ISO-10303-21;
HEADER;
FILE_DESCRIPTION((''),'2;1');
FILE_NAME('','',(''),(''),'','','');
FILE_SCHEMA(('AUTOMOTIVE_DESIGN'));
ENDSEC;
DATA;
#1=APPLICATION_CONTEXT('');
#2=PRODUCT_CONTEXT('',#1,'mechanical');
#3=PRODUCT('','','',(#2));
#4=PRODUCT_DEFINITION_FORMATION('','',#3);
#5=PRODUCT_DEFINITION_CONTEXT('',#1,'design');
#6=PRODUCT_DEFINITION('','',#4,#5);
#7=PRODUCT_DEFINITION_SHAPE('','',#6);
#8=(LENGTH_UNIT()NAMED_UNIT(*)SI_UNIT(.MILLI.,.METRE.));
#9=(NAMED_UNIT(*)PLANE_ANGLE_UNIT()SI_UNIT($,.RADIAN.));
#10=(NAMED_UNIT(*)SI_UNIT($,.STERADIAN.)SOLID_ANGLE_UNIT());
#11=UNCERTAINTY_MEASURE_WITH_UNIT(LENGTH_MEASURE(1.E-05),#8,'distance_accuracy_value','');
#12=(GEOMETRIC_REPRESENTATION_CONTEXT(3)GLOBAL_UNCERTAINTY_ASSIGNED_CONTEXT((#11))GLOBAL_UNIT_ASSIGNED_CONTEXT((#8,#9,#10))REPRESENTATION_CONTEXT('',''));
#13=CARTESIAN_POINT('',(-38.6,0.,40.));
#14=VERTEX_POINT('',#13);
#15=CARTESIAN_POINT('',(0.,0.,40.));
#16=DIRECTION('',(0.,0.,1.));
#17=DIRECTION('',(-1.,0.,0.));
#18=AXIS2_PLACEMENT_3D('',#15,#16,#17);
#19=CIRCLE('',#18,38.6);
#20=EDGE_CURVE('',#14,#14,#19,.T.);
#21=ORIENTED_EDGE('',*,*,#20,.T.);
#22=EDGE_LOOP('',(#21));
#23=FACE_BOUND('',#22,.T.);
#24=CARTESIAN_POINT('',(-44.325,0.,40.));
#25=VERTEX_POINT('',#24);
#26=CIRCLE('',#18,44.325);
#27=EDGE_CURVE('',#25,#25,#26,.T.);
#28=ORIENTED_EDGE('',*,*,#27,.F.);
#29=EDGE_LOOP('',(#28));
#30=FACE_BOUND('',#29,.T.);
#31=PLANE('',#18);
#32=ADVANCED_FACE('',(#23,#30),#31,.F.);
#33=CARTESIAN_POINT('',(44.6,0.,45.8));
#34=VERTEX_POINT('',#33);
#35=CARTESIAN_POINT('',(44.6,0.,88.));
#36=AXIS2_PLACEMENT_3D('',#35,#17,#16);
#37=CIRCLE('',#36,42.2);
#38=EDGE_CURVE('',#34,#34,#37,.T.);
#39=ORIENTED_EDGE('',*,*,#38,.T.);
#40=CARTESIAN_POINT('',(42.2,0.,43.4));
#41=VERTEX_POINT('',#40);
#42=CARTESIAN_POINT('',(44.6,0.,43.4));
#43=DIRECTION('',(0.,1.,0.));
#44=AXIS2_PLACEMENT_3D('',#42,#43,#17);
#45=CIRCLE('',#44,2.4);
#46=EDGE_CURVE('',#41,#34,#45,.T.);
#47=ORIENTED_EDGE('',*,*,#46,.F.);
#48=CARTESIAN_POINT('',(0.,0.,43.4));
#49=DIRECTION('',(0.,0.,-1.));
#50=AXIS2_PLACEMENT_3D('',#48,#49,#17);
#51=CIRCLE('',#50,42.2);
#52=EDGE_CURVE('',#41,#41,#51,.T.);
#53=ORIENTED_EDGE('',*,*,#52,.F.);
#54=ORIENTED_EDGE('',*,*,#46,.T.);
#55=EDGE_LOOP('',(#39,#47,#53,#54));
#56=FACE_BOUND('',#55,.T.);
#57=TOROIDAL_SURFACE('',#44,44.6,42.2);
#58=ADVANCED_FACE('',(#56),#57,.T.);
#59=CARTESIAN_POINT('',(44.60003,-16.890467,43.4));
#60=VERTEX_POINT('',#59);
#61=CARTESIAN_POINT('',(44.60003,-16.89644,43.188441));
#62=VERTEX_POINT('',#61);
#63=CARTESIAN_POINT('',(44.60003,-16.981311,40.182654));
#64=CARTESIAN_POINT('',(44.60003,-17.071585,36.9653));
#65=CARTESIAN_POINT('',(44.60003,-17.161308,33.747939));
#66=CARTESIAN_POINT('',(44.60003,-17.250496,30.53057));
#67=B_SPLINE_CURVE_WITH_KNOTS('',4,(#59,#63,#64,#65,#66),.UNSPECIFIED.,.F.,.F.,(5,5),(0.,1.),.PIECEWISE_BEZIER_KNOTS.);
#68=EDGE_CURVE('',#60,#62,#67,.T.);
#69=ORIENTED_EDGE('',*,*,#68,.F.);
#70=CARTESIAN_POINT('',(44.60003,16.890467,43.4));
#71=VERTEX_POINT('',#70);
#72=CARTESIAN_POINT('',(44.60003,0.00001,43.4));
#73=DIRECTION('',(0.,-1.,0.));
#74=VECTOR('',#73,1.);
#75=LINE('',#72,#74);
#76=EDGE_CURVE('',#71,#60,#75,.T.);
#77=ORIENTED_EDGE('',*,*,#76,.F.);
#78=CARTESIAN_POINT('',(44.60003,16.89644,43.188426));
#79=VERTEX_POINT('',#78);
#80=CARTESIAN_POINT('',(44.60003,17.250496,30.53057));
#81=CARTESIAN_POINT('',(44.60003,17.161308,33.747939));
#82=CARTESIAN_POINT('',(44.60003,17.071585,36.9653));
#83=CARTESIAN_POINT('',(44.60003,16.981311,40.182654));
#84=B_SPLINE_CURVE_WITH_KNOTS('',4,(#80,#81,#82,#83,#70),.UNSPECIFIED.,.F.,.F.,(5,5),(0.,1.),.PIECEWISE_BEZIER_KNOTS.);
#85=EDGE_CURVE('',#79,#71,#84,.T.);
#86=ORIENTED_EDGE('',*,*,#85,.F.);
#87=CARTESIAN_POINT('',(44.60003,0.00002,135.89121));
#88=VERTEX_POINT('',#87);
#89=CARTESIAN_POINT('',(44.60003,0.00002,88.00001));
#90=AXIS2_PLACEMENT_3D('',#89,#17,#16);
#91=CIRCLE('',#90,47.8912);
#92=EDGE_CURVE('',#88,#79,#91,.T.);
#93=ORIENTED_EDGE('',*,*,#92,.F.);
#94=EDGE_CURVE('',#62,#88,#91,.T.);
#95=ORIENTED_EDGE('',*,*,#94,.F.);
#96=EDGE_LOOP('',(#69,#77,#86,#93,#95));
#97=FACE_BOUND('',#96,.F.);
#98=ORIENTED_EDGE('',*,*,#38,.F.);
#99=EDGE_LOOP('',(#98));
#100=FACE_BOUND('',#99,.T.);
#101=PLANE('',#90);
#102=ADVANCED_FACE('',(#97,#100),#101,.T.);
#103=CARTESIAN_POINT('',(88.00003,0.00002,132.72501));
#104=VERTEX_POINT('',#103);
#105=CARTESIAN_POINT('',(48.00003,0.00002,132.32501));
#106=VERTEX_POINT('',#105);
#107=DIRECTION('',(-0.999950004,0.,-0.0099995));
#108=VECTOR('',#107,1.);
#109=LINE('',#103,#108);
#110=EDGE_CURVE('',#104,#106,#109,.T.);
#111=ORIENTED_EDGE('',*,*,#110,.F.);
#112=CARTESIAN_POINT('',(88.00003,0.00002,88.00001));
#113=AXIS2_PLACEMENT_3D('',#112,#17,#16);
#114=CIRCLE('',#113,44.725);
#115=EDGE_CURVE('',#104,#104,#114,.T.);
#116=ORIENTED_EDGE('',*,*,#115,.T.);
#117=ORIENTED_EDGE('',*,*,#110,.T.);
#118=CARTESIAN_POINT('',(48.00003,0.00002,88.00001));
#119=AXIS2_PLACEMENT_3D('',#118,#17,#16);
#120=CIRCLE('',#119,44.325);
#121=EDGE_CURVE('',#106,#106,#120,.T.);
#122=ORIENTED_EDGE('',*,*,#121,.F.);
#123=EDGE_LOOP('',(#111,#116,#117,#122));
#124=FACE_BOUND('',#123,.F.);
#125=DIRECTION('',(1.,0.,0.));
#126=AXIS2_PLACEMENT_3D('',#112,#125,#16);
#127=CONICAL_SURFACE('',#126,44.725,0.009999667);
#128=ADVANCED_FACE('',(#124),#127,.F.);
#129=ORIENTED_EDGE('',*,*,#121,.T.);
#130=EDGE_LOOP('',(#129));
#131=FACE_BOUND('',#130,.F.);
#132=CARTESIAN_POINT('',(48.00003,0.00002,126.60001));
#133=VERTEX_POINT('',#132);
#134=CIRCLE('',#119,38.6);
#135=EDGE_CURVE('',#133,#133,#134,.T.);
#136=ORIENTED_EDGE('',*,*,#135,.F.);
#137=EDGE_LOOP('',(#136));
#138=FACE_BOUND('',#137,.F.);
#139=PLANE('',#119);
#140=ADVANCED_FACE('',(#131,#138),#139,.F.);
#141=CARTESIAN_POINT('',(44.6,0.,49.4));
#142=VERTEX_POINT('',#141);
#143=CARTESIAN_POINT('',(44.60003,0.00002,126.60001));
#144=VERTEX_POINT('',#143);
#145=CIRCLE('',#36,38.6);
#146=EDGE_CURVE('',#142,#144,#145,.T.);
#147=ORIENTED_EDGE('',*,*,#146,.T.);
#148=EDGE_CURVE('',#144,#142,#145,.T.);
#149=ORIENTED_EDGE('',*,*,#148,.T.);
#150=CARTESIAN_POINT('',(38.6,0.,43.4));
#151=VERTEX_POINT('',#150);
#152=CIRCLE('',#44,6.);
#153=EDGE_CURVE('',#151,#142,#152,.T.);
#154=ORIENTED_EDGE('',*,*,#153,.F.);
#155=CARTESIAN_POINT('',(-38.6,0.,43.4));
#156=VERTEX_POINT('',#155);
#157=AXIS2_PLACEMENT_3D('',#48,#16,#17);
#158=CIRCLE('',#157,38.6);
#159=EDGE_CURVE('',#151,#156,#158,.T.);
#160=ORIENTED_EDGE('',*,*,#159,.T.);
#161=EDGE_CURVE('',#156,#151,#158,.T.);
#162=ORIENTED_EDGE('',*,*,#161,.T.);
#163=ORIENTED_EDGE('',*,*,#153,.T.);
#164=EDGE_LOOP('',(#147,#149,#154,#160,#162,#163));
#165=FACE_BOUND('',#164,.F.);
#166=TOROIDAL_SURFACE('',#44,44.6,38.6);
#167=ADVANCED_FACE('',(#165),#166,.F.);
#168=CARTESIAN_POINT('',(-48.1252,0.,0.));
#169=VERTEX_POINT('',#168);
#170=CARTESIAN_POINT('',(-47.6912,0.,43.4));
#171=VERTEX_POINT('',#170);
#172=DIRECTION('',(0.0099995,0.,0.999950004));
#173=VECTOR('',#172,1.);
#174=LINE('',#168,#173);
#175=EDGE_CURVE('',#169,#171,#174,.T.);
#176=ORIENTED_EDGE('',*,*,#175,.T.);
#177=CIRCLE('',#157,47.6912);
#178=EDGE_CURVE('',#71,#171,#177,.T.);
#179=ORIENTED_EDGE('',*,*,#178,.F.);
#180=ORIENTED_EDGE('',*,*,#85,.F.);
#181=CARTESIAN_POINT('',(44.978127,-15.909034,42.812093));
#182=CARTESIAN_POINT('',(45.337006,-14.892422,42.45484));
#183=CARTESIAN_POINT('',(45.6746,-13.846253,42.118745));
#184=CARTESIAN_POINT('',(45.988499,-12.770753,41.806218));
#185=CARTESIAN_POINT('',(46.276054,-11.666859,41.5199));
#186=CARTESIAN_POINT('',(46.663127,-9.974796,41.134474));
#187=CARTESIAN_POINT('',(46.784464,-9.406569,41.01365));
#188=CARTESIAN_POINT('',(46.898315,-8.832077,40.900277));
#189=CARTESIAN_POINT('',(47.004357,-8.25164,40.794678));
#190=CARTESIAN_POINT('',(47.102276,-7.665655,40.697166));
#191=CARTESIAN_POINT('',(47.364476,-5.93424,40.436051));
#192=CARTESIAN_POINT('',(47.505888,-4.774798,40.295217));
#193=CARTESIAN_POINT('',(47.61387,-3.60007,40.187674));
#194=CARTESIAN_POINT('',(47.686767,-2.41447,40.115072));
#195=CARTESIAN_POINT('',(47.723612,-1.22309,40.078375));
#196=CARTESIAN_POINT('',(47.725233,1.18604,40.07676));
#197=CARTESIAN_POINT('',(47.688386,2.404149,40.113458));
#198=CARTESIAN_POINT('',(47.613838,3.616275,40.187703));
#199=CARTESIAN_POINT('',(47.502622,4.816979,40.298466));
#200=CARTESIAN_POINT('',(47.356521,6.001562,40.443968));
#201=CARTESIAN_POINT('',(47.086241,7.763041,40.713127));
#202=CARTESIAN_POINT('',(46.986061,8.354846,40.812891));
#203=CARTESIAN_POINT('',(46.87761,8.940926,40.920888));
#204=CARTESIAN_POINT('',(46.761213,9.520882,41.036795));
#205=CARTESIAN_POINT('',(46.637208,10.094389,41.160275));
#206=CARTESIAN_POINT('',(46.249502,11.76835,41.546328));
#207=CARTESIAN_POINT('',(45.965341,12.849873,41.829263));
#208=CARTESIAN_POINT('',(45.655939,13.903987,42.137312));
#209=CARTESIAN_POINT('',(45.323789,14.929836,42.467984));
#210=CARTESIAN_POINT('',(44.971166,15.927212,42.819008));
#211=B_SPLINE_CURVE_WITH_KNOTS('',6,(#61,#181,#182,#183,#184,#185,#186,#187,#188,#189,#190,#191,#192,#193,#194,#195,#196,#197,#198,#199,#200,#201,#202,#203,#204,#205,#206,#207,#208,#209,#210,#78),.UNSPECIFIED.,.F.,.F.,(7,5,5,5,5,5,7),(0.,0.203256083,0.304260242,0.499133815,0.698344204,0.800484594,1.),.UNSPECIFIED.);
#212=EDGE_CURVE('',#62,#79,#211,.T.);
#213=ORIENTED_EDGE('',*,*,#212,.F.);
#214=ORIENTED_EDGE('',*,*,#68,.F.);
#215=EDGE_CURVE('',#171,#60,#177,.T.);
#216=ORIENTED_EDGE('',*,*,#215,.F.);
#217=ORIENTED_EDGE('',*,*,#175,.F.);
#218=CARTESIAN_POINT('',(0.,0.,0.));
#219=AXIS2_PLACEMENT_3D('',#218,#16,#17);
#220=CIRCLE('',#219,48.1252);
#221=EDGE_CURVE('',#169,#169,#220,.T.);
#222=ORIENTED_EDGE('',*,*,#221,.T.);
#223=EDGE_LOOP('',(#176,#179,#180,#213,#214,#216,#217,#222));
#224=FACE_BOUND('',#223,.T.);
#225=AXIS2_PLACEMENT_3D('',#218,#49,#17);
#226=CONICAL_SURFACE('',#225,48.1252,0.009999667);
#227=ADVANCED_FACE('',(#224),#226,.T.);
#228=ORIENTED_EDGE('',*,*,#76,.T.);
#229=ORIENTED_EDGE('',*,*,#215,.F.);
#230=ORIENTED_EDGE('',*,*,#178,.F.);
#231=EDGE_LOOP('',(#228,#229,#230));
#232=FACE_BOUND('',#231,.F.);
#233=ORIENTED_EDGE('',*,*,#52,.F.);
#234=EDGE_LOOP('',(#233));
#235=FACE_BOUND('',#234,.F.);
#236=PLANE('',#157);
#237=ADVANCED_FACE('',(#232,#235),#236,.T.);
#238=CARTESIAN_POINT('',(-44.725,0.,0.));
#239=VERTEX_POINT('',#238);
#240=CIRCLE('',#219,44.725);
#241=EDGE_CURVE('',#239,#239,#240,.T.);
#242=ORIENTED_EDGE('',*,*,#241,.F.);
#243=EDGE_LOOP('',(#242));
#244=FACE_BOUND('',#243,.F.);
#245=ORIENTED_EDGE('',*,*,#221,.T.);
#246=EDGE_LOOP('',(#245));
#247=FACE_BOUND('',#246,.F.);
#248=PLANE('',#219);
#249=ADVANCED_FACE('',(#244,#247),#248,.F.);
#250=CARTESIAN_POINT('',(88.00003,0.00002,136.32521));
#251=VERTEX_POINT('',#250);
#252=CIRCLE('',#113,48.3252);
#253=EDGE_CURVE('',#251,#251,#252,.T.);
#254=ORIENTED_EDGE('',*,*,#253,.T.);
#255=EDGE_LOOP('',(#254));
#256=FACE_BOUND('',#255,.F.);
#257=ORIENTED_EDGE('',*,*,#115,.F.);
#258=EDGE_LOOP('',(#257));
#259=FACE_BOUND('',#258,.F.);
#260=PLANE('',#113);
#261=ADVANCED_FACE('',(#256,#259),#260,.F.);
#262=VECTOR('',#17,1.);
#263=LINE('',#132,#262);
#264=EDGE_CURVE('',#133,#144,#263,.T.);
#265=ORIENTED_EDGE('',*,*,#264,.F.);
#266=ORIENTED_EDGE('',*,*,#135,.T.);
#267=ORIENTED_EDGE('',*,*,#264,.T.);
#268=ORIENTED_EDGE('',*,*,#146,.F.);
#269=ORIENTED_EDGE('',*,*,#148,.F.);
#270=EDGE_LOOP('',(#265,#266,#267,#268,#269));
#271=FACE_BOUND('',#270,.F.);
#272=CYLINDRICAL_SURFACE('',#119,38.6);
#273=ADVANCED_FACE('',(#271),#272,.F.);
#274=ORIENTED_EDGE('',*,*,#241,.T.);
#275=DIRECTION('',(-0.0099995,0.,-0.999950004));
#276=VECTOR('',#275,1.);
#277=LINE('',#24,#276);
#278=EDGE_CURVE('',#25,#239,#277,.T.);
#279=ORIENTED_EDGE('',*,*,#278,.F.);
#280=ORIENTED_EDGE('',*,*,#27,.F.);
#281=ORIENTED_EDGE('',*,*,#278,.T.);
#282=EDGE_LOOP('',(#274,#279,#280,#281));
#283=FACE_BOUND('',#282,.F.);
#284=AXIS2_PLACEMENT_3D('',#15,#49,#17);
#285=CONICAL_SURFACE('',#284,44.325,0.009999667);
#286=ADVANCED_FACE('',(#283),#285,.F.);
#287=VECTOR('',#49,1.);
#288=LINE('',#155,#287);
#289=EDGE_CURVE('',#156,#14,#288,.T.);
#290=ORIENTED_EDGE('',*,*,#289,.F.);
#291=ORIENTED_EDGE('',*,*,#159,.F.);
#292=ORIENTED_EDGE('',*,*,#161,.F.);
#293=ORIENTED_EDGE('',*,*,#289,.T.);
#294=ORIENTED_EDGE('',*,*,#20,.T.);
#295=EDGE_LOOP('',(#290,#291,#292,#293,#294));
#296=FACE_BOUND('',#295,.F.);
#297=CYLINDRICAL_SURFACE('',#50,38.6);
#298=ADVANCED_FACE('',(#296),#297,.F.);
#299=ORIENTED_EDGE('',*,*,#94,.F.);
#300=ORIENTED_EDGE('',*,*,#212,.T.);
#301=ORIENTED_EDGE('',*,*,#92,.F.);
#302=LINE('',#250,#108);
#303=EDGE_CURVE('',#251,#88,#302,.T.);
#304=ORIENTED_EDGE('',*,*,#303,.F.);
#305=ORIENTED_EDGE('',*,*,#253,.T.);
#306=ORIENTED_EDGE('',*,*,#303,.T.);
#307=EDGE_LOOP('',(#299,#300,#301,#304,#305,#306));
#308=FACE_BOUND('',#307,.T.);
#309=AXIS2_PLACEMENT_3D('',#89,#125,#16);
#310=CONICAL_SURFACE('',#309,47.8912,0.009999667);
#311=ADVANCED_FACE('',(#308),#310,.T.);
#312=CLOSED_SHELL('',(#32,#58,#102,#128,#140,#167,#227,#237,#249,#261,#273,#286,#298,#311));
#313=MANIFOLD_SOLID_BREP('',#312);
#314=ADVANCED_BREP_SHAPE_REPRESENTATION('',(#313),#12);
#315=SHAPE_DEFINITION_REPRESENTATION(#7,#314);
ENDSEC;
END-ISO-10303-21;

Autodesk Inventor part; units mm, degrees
ref_plane "YZ Plane" through (0, 0, 0) normal (1, 0, 0) x (0, 1, 0)
ref_plane "XZ Plane" through (0, 0, 0) normal (0, 1, 0) x (-1, 0, 0)
ref_plane "XY Plane" through (0, 0, 0) normal (0, 0, 1) x (1, 0, 0)
sketch "Sketch1" plane through (0, 0, 0) normal (0, 1, 0) x (-1, 0, 0)
  line L0 (0, 0) -> (0, 43.4)
  line L1 (48.1252, 0) -> (0, 0)
  line L2 (0, 43.4) -> (47.6912, 43.4)
  line L3 (44.325, 40) -> (44.725, 0)
  line L4 (48.1252, 0) -> (47.6912, 43.4)
  line L5 (38.6, 43.4) -> (38.6, 40)
  line L6 (38.6, 40) -> (44.325, 40)
  line L7 (38.6, 40) -> (0, 40) construction
  dimension "d0" = 89.45
  dimension "d3" = 88.65
  dimension "d4" = 3.4
  dimension "d5" = 40
  dimension "d6" = 3.4
  dimension "d7" = 77.2
revolve "Revolution1" add sketch "Sketch1" angle 360 about axis through (0, 0, 0) along (0, 0, 1) contours L3 L6 L5 L2 L4 L1
sketch "Sketch2" plane through (0, 0, 43.4) normal (0, 0, 1) x (1, 0, 0)
  circle A0 centre (0, 0) radius 47.6912 projected
  circle A1 centre (0, 0) radius 38.6 projected
  circle A2 centre (0, 0) radius 42.2
  circle A3 centre (0, 0) radius 38.6
  dimension "d8" = 77.2
  dimension "d9" = 3.6
sketch "Sketch3" plane through (0, 0, 0) normal (0, 1, 0) x (-1, 0, 0)
  arc A0 (0, 43.4) -> (-44.6, 88) centre (-44.6, 43.4) ccw
  dimension "d10" = 44.6
  dimension "d11" = 44.6
  dimension "d12" = 44.6
sweep "Sweep1" add profiles "Sketch2" path "Sketch3" contours A2
sketch "Sketch4" plane through (0, 0, 0) normal (0, 1, 0) x (-1, 0, 0)
  line L0 (-44.6, 49.4) -> (-44.6, 126.6) projected
  line L1 (-88, 88) -> (-44.6, 88)
  line L2 (-44.6, 88) -> (-44.6, 135.8912)
  line L3 (-44.6, 135.8912) -> (-88, 136.3252)
  line L4 (-88, 136.3252) -> (-88, 88)
  line L5 (-88, 132.725) -> (-48, 132.325)
  line L6 (-48, 135.9252) -> (-48, 126.6)
  line L7 (-48, 126.6) -> (-44.6, 126.6)
  line L8 (-48, 126.6) -> (-48, 88) construction
  dimension "d14" = 3.6
  dimension "d15" = 40
  dimension "d16" = 3.4
  dimension "d17" = 89.45
  dimension "d18" = 88.65
  dimension "d19" = 77.2
revolve "Revolution2" add sketch "Sketch4" angle 360 about axis through (88, 0, 88) along (-1, 0, 0) contours L7 L6 L3 L2 | L4 L3 L6 L5
equation "\"d0\" = d1"
equation "\"d3\" = d2"
equation "\"d4\" = t2"
equation "\"d5\" = l1"
equation "\"d6\" = t2"
equation "\"d7\" = d"
equation "\"d8\" = d"
equation "\"d9\" = t1"
equation "\"d10\" = Z - t2"
equation "\"d11\" = Z - t2"
equation "\"d12\" = Z - t2"
equation "\"d14\" = t1"
equation "\"d15\" = l1"
equation "\"d16\" = t2"
equation "\"d17\" = d1"
equation "\"d18\" = d2"
equation "\"d19\" = d"
equation "\"d\" = 77.2"
equation "\"d1\" = 89.45"
equation "\"d2\" = 88.65"
equation "\"l1\" = 40"
equation "\"L\" = 88"
equation "\"t1\" = 3.6"
equation "\"t2\" = 3.4"
equation "\"Z\" = 48"
properties part number "JIS K 6739 90 Deg Elbow (DL) 75" material "PVC, Unplasticized"
